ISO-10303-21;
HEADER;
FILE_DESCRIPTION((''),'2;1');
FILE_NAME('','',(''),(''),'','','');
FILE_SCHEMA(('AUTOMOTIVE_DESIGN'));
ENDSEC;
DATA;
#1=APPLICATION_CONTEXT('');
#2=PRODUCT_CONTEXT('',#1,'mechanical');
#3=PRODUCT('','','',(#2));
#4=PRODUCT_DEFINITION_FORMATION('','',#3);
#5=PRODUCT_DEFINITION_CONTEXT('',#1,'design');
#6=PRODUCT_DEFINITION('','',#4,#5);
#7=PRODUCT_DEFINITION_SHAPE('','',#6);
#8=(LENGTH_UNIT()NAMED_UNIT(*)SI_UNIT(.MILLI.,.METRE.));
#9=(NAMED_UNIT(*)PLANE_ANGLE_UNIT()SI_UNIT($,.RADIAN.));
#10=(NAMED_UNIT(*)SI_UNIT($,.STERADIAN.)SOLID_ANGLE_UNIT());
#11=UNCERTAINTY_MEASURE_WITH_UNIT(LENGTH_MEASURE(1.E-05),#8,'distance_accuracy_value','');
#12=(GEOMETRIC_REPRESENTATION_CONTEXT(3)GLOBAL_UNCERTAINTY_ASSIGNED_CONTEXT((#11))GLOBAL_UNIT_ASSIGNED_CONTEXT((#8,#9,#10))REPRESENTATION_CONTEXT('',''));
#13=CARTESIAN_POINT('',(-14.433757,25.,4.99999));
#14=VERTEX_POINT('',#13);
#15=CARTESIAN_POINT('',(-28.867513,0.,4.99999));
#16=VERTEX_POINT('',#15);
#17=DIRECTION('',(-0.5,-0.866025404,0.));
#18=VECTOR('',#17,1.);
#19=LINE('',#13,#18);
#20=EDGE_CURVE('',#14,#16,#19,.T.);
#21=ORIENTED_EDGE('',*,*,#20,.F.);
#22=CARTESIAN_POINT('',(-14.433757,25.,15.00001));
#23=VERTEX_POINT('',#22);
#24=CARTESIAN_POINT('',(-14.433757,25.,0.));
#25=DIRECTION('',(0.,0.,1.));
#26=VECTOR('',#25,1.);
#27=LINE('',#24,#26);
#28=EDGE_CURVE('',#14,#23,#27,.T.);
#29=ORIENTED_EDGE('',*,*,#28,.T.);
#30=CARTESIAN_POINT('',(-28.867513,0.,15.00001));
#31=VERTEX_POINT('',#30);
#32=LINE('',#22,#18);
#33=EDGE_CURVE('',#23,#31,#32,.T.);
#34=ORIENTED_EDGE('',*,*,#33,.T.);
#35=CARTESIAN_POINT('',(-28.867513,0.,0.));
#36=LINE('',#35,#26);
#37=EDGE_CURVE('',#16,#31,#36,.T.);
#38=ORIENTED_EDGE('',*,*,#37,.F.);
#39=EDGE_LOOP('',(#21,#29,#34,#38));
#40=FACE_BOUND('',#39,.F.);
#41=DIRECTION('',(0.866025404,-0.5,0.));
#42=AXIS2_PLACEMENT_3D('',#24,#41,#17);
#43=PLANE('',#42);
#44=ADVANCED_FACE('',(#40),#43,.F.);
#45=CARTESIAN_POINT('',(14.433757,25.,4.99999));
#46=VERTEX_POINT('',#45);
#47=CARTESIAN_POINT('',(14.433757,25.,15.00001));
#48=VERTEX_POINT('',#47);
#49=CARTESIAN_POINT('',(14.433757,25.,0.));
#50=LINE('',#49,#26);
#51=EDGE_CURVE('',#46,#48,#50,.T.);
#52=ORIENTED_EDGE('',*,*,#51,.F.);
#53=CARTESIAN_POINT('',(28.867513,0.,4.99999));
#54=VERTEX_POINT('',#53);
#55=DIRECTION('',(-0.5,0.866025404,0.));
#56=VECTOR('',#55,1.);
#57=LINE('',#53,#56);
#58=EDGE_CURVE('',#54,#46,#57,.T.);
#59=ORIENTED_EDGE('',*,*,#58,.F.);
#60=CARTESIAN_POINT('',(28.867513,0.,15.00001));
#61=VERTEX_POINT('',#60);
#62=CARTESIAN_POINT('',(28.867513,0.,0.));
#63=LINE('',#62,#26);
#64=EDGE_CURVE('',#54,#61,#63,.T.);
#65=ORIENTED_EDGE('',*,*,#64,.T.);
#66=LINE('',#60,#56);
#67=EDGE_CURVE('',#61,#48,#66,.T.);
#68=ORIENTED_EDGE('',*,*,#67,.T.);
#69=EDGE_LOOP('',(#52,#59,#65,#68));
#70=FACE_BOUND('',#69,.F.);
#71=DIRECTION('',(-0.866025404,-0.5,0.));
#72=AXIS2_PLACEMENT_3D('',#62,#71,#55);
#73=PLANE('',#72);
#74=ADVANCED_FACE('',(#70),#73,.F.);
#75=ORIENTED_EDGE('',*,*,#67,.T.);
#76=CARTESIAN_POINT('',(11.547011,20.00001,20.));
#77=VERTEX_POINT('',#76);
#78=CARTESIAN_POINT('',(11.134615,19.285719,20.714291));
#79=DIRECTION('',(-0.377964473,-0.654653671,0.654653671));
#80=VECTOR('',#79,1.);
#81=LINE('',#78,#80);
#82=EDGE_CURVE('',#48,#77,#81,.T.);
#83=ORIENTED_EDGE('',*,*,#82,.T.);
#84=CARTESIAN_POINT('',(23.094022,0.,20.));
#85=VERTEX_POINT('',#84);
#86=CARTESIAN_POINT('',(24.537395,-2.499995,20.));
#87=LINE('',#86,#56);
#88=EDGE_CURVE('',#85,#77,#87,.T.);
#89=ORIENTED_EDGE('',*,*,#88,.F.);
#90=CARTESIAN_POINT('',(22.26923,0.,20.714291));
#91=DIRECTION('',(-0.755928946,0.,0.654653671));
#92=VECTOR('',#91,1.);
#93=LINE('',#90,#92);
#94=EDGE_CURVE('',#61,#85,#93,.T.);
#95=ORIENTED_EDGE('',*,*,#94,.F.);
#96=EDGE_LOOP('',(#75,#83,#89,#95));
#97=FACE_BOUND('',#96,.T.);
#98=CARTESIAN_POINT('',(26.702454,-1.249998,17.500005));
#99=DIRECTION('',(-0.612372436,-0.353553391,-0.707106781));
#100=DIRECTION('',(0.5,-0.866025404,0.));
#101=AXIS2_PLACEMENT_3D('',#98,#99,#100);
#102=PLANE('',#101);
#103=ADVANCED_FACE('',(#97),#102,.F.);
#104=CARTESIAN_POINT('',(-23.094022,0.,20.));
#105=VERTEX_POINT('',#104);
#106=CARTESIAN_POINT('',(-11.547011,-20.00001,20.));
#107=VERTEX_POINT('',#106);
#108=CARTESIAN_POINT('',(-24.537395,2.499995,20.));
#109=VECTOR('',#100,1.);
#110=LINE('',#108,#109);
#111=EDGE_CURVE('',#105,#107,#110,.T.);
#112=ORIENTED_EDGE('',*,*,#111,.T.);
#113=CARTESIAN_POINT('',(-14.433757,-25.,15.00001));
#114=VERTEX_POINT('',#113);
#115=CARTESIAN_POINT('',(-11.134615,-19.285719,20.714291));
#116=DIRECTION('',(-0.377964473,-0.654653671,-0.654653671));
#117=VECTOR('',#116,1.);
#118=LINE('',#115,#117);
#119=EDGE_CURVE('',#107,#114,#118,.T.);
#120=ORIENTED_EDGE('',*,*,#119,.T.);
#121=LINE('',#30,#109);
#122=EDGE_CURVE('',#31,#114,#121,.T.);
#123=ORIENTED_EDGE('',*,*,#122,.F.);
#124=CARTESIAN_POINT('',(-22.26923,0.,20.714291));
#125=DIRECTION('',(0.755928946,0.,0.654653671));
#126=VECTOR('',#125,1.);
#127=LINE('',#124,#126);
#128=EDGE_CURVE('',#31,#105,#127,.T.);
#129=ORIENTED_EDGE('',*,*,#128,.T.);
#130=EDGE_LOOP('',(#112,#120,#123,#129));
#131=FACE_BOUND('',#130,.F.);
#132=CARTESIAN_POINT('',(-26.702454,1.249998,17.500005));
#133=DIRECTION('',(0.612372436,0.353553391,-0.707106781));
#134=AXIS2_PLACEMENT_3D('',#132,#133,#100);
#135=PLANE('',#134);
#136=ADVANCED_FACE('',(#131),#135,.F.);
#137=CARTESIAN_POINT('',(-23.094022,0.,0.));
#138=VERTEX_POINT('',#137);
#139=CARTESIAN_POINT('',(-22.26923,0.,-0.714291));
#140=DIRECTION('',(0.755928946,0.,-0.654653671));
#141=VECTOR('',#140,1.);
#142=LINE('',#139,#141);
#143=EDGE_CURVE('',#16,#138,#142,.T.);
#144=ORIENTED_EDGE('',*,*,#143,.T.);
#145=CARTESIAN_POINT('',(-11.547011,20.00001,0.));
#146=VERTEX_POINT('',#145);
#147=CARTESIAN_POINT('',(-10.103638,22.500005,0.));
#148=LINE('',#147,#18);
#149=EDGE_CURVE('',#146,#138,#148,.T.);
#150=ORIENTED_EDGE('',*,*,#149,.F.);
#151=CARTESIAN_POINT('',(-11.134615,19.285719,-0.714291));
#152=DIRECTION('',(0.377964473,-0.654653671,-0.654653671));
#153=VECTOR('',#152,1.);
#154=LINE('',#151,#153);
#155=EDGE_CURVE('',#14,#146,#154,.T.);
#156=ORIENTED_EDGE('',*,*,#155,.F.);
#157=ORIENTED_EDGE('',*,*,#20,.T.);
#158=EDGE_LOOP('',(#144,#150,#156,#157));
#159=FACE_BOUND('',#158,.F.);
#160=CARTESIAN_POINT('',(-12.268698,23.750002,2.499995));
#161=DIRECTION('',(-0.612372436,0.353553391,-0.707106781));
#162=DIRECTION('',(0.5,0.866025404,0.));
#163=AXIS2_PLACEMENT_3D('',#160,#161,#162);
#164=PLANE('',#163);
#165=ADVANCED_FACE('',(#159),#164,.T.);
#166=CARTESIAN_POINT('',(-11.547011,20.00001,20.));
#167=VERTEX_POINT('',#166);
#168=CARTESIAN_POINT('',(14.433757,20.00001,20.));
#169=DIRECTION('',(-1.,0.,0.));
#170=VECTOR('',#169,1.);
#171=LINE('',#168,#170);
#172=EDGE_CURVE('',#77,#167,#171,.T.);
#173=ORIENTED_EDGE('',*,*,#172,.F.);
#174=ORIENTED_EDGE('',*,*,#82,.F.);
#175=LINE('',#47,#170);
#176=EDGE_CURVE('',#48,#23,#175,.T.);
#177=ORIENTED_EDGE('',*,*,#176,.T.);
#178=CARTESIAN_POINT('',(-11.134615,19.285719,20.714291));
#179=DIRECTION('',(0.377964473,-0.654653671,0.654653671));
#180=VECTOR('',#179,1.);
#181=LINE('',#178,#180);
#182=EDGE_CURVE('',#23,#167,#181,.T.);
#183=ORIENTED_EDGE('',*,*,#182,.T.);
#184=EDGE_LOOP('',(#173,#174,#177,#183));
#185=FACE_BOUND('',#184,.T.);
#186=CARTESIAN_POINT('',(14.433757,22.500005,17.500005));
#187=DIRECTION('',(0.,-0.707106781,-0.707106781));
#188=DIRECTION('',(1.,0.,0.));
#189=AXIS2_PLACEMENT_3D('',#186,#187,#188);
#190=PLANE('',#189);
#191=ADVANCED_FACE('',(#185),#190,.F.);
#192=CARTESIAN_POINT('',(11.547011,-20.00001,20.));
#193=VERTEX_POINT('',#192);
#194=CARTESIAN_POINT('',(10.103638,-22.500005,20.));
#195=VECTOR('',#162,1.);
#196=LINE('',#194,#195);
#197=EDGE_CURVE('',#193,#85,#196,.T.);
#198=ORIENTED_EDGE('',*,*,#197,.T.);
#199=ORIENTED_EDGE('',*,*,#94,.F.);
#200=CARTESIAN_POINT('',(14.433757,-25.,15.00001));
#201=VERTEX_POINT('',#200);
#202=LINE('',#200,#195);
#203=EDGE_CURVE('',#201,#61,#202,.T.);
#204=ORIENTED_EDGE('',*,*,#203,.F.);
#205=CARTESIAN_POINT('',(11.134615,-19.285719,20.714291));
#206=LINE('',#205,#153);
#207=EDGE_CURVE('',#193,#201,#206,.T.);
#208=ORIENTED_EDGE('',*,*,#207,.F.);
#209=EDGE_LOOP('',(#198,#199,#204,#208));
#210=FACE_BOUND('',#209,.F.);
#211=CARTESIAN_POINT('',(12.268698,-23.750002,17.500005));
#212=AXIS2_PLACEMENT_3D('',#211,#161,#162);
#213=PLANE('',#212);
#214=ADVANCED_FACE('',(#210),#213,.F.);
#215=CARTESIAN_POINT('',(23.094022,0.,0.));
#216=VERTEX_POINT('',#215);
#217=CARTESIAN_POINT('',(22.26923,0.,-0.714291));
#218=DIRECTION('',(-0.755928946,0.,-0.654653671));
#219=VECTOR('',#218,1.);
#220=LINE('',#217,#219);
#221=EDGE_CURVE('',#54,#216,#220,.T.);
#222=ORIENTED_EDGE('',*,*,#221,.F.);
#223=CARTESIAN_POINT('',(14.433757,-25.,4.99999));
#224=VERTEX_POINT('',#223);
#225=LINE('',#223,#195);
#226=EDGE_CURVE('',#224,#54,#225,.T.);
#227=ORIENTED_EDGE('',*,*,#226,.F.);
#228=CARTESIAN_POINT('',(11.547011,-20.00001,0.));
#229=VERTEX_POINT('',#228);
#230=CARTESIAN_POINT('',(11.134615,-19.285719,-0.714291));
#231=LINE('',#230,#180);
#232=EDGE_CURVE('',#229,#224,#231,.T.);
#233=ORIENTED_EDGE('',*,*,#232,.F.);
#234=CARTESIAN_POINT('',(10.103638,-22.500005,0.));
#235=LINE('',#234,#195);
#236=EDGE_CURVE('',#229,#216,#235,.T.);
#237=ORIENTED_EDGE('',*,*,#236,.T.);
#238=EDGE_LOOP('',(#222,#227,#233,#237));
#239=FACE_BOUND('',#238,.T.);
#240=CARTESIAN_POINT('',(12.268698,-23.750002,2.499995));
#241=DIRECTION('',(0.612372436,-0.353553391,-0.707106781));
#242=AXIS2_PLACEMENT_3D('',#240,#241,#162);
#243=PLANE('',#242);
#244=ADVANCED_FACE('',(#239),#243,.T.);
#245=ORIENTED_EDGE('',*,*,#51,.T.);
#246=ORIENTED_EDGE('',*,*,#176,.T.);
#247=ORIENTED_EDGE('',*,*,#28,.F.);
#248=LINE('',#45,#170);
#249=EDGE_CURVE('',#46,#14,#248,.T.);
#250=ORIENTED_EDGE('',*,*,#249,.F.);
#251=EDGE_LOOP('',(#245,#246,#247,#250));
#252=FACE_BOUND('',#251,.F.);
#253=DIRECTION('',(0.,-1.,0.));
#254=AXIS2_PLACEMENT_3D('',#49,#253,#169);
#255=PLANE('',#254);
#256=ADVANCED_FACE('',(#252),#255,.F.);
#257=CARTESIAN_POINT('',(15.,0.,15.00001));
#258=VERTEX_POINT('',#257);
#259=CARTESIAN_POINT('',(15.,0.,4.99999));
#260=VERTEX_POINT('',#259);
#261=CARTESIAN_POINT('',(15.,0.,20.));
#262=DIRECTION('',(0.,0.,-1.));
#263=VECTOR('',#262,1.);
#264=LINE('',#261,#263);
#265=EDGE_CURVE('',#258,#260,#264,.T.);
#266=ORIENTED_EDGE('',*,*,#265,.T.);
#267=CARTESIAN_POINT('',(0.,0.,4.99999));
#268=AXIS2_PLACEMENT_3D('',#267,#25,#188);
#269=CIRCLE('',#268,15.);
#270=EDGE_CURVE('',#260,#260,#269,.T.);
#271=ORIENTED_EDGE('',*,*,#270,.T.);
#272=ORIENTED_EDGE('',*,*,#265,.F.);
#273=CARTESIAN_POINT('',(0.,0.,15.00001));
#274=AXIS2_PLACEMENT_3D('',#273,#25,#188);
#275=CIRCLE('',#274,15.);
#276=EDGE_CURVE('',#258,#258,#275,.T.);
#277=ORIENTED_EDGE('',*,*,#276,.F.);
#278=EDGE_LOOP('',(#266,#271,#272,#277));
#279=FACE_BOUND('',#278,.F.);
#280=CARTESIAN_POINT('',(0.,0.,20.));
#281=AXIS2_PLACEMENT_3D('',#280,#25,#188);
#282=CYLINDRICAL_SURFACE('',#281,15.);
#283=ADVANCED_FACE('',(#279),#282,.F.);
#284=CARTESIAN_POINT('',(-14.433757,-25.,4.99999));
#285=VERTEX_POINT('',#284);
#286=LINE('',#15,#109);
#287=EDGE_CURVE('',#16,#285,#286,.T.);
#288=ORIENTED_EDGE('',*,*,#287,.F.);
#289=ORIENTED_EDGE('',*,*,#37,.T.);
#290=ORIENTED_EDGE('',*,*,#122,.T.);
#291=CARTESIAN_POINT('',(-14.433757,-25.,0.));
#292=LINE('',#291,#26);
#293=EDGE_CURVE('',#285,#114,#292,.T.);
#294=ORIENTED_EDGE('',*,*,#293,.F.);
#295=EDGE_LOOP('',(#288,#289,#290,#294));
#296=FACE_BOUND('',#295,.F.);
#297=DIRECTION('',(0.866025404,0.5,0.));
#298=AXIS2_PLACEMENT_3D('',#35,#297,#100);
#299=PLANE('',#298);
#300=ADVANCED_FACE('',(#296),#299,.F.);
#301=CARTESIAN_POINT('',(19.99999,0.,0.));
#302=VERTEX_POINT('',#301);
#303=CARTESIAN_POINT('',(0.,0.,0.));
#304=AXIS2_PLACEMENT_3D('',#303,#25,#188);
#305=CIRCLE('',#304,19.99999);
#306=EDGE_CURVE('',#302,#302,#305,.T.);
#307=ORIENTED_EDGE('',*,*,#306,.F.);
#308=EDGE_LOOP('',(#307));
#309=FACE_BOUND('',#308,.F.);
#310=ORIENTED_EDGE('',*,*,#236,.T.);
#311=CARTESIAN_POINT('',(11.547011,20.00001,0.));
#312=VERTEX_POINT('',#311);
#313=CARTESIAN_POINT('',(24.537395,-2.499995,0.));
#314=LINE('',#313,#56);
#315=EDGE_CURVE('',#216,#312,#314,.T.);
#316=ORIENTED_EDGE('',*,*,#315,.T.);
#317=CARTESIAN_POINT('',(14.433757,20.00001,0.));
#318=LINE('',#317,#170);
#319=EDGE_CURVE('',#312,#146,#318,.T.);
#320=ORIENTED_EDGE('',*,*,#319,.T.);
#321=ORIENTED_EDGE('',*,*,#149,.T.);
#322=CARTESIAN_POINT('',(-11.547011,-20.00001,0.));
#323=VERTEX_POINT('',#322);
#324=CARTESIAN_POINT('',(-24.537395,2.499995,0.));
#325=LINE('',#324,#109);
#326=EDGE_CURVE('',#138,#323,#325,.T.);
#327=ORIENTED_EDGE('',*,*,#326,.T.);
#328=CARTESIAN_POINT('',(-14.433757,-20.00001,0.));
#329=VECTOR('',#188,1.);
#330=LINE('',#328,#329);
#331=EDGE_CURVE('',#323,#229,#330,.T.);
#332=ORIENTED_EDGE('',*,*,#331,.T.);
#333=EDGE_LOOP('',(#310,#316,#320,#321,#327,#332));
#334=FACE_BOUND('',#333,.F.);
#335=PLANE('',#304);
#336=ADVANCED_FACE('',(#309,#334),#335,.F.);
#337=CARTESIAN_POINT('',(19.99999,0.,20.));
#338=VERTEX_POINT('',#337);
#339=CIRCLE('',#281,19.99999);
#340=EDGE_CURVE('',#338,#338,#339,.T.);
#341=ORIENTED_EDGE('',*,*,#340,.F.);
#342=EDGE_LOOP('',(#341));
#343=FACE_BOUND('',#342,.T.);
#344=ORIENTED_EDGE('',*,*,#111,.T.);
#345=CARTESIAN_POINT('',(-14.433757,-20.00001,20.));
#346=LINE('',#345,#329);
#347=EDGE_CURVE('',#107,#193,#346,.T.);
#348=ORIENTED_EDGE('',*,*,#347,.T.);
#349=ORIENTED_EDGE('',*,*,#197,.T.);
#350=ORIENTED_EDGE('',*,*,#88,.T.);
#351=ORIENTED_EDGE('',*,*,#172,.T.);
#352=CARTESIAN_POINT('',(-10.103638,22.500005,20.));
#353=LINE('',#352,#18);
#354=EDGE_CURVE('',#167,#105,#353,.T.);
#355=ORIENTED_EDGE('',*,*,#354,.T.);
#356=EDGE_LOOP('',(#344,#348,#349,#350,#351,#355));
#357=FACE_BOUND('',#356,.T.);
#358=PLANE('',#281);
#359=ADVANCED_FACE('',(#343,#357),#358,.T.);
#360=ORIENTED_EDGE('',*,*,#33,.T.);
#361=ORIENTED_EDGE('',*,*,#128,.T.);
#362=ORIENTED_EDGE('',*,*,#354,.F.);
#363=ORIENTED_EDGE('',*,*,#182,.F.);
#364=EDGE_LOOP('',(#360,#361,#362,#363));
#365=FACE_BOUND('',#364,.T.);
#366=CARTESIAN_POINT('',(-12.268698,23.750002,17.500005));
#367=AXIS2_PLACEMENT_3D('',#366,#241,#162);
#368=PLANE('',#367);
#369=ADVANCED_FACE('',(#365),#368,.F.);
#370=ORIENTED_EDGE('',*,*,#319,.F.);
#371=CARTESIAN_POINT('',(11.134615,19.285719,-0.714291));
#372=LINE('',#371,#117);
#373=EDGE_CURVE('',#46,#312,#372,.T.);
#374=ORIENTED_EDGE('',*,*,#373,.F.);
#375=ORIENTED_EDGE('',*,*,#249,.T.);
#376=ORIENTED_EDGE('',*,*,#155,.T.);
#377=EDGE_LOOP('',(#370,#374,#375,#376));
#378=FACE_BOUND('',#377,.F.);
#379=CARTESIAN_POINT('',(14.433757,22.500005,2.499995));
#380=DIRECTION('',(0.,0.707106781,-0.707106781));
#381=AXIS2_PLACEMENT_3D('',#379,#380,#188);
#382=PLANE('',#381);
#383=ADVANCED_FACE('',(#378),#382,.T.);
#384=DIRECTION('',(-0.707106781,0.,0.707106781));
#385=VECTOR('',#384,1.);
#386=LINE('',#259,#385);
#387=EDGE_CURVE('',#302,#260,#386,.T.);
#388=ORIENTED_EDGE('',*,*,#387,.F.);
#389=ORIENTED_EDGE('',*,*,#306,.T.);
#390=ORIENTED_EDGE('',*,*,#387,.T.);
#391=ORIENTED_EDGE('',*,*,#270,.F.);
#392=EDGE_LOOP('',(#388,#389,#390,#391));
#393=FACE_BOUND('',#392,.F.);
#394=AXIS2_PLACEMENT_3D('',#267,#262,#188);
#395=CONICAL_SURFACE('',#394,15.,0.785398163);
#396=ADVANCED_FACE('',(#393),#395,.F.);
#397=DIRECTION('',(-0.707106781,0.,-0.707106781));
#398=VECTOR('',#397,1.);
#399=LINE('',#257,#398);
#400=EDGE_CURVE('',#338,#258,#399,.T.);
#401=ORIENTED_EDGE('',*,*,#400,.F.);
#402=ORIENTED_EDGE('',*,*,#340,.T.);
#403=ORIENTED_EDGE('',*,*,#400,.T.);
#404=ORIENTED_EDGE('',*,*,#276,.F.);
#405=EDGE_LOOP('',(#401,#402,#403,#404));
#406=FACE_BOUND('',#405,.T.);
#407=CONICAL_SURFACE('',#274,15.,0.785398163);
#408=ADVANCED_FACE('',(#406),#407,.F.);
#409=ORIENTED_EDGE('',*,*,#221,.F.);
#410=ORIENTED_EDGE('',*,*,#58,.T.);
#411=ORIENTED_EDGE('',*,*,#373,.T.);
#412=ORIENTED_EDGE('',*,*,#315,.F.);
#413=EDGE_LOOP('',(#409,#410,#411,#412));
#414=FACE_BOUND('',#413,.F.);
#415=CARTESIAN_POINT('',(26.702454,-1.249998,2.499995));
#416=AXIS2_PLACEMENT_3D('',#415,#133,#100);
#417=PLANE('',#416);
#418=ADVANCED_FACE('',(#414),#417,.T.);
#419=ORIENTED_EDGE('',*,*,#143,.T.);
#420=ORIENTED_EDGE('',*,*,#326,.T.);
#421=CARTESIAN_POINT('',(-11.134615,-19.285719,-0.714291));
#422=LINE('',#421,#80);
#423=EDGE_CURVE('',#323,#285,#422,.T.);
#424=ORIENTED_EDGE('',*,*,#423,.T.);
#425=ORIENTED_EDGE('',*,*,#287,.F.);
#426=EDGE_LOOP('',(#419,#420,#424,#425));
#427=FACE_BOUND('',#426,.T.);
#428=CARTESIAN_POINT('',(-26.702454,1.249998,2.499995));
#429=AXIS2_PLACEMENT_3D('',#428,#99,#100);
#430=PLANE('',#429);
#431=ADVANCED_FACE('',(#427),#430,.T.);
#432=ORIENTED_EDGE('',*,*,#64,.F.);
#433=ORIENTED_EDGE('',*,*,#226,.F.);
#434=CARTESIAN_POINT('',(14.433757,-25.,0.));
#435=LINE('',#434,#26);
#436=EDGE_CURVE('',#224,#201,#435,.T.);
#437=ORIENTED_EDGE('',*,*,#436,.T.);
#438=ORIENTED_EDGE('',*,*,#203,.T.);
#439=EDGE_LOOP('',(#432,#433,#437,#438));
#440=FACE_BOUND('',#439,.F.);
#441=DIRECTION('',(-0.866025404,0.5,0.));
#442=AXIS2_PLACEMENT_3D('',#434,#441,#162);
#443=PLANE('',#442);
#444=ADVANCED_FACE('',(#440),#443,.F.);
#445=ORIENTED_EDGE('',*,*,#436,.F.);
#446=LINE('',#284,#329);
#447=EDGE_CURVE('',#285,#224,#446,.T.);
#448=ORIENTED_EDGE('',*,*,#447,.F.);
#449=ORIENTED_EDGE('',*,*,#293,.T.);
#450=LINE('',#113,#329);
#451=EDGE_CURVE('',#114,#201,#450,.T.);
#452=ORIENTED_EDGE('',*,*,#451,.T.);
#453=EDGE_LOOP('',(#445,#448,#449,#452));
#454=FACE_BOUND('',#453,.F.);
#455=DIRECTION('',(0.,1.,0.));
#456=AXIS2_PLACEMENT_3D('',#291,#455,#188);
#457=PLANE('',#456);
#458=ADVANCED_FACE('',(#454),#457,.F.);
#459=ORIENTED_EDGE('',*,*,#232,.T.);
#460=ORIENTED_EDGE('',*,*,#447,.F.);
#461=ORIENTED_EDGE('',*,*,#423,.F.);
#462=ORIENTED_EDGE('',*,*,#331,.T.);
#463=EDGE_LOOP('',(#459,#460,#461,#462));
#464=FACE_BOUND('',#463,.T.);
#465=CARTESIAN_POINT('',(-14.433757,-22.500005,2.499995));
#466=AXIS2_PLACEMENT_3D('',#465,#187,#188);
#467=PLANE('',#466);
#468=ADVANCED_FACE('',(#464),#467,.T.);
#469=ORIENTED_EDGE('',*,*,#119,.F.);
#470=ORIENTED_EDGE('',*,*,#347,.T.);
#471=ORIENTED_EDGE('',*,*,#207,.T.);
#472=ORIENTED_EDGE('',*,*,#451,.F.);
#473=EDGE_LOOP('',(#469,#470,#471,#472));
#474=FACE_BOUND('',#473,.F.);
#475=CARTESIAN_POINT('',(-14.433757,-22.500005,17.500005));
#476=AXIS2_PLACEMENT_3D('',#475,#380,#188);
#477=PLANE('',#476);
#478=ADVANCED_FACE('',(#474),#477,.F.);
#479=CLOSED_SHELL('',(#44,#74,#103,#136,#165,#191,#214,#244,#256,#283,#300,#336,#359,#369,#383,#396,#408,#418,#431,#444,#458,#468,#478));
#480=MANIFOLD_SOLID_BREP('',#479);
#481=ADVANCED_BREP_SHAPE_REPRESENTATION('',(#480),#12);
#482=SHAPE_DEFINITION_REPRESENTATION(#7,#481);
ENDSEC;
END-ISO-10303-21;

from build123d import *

# Parameters (mm, degrees)
F1_DEPTH = 20
F2_R     = 15
F3_DEPTH = 25
F4_SIZE  = 4.99999


# Not quite as in the source:
# - a fillet or chamfer is up to 0.001 mm smaller than in the source, because OpenCascade refuses the exact size


with BuildPart() as f1:
    # F0 (on Top) → F1 (new body)
    with BuildSketch(Plane.XY):
        Polygon((14.4337567297, 25), (-14.4337567297, 25), (-28.8675134595, 0), (-14.4337567297, -25), (14.4337567297, -25), (28.8675134595, 0), align=None)
    extrude(amount=F1_DEPTH)

    # F2 (on face) → F3 (cut)
    with BuildSketch(Plane.XY.offset(20)):
        Circle(F2_R)
    extrude(amount=-F3_DEPTH, mode=Mode.SUBTRACT)

    # F4 (size 5 in the source; OpenCascade refuses exactly that, so slightly less here)
    f4_edges = [f1.edges().sort_by_distance(p)[0] for p in [
        (0, 25, 20),
        (21.650635, 12.5, 20),
        (-21.650635, 12.5, 20),
        (21.650635, -12.5, 20),
        (-21.650635, -12.5, 20),
        (0, -25, 20),
        (-15, 0, 20),
        (0, 25, 0),
        (21.650635, 12.5, 0),
        (-21.650635, 12.5, 0),
        (21.650635, -12.5, 0),
        (-21.650635, -12.5, 0),
        (0, -25, 0),
        (-15, 0, 0),
    ]]
    chamfer(f4_edges, length=F4_SIZE)


solid = f1.part
